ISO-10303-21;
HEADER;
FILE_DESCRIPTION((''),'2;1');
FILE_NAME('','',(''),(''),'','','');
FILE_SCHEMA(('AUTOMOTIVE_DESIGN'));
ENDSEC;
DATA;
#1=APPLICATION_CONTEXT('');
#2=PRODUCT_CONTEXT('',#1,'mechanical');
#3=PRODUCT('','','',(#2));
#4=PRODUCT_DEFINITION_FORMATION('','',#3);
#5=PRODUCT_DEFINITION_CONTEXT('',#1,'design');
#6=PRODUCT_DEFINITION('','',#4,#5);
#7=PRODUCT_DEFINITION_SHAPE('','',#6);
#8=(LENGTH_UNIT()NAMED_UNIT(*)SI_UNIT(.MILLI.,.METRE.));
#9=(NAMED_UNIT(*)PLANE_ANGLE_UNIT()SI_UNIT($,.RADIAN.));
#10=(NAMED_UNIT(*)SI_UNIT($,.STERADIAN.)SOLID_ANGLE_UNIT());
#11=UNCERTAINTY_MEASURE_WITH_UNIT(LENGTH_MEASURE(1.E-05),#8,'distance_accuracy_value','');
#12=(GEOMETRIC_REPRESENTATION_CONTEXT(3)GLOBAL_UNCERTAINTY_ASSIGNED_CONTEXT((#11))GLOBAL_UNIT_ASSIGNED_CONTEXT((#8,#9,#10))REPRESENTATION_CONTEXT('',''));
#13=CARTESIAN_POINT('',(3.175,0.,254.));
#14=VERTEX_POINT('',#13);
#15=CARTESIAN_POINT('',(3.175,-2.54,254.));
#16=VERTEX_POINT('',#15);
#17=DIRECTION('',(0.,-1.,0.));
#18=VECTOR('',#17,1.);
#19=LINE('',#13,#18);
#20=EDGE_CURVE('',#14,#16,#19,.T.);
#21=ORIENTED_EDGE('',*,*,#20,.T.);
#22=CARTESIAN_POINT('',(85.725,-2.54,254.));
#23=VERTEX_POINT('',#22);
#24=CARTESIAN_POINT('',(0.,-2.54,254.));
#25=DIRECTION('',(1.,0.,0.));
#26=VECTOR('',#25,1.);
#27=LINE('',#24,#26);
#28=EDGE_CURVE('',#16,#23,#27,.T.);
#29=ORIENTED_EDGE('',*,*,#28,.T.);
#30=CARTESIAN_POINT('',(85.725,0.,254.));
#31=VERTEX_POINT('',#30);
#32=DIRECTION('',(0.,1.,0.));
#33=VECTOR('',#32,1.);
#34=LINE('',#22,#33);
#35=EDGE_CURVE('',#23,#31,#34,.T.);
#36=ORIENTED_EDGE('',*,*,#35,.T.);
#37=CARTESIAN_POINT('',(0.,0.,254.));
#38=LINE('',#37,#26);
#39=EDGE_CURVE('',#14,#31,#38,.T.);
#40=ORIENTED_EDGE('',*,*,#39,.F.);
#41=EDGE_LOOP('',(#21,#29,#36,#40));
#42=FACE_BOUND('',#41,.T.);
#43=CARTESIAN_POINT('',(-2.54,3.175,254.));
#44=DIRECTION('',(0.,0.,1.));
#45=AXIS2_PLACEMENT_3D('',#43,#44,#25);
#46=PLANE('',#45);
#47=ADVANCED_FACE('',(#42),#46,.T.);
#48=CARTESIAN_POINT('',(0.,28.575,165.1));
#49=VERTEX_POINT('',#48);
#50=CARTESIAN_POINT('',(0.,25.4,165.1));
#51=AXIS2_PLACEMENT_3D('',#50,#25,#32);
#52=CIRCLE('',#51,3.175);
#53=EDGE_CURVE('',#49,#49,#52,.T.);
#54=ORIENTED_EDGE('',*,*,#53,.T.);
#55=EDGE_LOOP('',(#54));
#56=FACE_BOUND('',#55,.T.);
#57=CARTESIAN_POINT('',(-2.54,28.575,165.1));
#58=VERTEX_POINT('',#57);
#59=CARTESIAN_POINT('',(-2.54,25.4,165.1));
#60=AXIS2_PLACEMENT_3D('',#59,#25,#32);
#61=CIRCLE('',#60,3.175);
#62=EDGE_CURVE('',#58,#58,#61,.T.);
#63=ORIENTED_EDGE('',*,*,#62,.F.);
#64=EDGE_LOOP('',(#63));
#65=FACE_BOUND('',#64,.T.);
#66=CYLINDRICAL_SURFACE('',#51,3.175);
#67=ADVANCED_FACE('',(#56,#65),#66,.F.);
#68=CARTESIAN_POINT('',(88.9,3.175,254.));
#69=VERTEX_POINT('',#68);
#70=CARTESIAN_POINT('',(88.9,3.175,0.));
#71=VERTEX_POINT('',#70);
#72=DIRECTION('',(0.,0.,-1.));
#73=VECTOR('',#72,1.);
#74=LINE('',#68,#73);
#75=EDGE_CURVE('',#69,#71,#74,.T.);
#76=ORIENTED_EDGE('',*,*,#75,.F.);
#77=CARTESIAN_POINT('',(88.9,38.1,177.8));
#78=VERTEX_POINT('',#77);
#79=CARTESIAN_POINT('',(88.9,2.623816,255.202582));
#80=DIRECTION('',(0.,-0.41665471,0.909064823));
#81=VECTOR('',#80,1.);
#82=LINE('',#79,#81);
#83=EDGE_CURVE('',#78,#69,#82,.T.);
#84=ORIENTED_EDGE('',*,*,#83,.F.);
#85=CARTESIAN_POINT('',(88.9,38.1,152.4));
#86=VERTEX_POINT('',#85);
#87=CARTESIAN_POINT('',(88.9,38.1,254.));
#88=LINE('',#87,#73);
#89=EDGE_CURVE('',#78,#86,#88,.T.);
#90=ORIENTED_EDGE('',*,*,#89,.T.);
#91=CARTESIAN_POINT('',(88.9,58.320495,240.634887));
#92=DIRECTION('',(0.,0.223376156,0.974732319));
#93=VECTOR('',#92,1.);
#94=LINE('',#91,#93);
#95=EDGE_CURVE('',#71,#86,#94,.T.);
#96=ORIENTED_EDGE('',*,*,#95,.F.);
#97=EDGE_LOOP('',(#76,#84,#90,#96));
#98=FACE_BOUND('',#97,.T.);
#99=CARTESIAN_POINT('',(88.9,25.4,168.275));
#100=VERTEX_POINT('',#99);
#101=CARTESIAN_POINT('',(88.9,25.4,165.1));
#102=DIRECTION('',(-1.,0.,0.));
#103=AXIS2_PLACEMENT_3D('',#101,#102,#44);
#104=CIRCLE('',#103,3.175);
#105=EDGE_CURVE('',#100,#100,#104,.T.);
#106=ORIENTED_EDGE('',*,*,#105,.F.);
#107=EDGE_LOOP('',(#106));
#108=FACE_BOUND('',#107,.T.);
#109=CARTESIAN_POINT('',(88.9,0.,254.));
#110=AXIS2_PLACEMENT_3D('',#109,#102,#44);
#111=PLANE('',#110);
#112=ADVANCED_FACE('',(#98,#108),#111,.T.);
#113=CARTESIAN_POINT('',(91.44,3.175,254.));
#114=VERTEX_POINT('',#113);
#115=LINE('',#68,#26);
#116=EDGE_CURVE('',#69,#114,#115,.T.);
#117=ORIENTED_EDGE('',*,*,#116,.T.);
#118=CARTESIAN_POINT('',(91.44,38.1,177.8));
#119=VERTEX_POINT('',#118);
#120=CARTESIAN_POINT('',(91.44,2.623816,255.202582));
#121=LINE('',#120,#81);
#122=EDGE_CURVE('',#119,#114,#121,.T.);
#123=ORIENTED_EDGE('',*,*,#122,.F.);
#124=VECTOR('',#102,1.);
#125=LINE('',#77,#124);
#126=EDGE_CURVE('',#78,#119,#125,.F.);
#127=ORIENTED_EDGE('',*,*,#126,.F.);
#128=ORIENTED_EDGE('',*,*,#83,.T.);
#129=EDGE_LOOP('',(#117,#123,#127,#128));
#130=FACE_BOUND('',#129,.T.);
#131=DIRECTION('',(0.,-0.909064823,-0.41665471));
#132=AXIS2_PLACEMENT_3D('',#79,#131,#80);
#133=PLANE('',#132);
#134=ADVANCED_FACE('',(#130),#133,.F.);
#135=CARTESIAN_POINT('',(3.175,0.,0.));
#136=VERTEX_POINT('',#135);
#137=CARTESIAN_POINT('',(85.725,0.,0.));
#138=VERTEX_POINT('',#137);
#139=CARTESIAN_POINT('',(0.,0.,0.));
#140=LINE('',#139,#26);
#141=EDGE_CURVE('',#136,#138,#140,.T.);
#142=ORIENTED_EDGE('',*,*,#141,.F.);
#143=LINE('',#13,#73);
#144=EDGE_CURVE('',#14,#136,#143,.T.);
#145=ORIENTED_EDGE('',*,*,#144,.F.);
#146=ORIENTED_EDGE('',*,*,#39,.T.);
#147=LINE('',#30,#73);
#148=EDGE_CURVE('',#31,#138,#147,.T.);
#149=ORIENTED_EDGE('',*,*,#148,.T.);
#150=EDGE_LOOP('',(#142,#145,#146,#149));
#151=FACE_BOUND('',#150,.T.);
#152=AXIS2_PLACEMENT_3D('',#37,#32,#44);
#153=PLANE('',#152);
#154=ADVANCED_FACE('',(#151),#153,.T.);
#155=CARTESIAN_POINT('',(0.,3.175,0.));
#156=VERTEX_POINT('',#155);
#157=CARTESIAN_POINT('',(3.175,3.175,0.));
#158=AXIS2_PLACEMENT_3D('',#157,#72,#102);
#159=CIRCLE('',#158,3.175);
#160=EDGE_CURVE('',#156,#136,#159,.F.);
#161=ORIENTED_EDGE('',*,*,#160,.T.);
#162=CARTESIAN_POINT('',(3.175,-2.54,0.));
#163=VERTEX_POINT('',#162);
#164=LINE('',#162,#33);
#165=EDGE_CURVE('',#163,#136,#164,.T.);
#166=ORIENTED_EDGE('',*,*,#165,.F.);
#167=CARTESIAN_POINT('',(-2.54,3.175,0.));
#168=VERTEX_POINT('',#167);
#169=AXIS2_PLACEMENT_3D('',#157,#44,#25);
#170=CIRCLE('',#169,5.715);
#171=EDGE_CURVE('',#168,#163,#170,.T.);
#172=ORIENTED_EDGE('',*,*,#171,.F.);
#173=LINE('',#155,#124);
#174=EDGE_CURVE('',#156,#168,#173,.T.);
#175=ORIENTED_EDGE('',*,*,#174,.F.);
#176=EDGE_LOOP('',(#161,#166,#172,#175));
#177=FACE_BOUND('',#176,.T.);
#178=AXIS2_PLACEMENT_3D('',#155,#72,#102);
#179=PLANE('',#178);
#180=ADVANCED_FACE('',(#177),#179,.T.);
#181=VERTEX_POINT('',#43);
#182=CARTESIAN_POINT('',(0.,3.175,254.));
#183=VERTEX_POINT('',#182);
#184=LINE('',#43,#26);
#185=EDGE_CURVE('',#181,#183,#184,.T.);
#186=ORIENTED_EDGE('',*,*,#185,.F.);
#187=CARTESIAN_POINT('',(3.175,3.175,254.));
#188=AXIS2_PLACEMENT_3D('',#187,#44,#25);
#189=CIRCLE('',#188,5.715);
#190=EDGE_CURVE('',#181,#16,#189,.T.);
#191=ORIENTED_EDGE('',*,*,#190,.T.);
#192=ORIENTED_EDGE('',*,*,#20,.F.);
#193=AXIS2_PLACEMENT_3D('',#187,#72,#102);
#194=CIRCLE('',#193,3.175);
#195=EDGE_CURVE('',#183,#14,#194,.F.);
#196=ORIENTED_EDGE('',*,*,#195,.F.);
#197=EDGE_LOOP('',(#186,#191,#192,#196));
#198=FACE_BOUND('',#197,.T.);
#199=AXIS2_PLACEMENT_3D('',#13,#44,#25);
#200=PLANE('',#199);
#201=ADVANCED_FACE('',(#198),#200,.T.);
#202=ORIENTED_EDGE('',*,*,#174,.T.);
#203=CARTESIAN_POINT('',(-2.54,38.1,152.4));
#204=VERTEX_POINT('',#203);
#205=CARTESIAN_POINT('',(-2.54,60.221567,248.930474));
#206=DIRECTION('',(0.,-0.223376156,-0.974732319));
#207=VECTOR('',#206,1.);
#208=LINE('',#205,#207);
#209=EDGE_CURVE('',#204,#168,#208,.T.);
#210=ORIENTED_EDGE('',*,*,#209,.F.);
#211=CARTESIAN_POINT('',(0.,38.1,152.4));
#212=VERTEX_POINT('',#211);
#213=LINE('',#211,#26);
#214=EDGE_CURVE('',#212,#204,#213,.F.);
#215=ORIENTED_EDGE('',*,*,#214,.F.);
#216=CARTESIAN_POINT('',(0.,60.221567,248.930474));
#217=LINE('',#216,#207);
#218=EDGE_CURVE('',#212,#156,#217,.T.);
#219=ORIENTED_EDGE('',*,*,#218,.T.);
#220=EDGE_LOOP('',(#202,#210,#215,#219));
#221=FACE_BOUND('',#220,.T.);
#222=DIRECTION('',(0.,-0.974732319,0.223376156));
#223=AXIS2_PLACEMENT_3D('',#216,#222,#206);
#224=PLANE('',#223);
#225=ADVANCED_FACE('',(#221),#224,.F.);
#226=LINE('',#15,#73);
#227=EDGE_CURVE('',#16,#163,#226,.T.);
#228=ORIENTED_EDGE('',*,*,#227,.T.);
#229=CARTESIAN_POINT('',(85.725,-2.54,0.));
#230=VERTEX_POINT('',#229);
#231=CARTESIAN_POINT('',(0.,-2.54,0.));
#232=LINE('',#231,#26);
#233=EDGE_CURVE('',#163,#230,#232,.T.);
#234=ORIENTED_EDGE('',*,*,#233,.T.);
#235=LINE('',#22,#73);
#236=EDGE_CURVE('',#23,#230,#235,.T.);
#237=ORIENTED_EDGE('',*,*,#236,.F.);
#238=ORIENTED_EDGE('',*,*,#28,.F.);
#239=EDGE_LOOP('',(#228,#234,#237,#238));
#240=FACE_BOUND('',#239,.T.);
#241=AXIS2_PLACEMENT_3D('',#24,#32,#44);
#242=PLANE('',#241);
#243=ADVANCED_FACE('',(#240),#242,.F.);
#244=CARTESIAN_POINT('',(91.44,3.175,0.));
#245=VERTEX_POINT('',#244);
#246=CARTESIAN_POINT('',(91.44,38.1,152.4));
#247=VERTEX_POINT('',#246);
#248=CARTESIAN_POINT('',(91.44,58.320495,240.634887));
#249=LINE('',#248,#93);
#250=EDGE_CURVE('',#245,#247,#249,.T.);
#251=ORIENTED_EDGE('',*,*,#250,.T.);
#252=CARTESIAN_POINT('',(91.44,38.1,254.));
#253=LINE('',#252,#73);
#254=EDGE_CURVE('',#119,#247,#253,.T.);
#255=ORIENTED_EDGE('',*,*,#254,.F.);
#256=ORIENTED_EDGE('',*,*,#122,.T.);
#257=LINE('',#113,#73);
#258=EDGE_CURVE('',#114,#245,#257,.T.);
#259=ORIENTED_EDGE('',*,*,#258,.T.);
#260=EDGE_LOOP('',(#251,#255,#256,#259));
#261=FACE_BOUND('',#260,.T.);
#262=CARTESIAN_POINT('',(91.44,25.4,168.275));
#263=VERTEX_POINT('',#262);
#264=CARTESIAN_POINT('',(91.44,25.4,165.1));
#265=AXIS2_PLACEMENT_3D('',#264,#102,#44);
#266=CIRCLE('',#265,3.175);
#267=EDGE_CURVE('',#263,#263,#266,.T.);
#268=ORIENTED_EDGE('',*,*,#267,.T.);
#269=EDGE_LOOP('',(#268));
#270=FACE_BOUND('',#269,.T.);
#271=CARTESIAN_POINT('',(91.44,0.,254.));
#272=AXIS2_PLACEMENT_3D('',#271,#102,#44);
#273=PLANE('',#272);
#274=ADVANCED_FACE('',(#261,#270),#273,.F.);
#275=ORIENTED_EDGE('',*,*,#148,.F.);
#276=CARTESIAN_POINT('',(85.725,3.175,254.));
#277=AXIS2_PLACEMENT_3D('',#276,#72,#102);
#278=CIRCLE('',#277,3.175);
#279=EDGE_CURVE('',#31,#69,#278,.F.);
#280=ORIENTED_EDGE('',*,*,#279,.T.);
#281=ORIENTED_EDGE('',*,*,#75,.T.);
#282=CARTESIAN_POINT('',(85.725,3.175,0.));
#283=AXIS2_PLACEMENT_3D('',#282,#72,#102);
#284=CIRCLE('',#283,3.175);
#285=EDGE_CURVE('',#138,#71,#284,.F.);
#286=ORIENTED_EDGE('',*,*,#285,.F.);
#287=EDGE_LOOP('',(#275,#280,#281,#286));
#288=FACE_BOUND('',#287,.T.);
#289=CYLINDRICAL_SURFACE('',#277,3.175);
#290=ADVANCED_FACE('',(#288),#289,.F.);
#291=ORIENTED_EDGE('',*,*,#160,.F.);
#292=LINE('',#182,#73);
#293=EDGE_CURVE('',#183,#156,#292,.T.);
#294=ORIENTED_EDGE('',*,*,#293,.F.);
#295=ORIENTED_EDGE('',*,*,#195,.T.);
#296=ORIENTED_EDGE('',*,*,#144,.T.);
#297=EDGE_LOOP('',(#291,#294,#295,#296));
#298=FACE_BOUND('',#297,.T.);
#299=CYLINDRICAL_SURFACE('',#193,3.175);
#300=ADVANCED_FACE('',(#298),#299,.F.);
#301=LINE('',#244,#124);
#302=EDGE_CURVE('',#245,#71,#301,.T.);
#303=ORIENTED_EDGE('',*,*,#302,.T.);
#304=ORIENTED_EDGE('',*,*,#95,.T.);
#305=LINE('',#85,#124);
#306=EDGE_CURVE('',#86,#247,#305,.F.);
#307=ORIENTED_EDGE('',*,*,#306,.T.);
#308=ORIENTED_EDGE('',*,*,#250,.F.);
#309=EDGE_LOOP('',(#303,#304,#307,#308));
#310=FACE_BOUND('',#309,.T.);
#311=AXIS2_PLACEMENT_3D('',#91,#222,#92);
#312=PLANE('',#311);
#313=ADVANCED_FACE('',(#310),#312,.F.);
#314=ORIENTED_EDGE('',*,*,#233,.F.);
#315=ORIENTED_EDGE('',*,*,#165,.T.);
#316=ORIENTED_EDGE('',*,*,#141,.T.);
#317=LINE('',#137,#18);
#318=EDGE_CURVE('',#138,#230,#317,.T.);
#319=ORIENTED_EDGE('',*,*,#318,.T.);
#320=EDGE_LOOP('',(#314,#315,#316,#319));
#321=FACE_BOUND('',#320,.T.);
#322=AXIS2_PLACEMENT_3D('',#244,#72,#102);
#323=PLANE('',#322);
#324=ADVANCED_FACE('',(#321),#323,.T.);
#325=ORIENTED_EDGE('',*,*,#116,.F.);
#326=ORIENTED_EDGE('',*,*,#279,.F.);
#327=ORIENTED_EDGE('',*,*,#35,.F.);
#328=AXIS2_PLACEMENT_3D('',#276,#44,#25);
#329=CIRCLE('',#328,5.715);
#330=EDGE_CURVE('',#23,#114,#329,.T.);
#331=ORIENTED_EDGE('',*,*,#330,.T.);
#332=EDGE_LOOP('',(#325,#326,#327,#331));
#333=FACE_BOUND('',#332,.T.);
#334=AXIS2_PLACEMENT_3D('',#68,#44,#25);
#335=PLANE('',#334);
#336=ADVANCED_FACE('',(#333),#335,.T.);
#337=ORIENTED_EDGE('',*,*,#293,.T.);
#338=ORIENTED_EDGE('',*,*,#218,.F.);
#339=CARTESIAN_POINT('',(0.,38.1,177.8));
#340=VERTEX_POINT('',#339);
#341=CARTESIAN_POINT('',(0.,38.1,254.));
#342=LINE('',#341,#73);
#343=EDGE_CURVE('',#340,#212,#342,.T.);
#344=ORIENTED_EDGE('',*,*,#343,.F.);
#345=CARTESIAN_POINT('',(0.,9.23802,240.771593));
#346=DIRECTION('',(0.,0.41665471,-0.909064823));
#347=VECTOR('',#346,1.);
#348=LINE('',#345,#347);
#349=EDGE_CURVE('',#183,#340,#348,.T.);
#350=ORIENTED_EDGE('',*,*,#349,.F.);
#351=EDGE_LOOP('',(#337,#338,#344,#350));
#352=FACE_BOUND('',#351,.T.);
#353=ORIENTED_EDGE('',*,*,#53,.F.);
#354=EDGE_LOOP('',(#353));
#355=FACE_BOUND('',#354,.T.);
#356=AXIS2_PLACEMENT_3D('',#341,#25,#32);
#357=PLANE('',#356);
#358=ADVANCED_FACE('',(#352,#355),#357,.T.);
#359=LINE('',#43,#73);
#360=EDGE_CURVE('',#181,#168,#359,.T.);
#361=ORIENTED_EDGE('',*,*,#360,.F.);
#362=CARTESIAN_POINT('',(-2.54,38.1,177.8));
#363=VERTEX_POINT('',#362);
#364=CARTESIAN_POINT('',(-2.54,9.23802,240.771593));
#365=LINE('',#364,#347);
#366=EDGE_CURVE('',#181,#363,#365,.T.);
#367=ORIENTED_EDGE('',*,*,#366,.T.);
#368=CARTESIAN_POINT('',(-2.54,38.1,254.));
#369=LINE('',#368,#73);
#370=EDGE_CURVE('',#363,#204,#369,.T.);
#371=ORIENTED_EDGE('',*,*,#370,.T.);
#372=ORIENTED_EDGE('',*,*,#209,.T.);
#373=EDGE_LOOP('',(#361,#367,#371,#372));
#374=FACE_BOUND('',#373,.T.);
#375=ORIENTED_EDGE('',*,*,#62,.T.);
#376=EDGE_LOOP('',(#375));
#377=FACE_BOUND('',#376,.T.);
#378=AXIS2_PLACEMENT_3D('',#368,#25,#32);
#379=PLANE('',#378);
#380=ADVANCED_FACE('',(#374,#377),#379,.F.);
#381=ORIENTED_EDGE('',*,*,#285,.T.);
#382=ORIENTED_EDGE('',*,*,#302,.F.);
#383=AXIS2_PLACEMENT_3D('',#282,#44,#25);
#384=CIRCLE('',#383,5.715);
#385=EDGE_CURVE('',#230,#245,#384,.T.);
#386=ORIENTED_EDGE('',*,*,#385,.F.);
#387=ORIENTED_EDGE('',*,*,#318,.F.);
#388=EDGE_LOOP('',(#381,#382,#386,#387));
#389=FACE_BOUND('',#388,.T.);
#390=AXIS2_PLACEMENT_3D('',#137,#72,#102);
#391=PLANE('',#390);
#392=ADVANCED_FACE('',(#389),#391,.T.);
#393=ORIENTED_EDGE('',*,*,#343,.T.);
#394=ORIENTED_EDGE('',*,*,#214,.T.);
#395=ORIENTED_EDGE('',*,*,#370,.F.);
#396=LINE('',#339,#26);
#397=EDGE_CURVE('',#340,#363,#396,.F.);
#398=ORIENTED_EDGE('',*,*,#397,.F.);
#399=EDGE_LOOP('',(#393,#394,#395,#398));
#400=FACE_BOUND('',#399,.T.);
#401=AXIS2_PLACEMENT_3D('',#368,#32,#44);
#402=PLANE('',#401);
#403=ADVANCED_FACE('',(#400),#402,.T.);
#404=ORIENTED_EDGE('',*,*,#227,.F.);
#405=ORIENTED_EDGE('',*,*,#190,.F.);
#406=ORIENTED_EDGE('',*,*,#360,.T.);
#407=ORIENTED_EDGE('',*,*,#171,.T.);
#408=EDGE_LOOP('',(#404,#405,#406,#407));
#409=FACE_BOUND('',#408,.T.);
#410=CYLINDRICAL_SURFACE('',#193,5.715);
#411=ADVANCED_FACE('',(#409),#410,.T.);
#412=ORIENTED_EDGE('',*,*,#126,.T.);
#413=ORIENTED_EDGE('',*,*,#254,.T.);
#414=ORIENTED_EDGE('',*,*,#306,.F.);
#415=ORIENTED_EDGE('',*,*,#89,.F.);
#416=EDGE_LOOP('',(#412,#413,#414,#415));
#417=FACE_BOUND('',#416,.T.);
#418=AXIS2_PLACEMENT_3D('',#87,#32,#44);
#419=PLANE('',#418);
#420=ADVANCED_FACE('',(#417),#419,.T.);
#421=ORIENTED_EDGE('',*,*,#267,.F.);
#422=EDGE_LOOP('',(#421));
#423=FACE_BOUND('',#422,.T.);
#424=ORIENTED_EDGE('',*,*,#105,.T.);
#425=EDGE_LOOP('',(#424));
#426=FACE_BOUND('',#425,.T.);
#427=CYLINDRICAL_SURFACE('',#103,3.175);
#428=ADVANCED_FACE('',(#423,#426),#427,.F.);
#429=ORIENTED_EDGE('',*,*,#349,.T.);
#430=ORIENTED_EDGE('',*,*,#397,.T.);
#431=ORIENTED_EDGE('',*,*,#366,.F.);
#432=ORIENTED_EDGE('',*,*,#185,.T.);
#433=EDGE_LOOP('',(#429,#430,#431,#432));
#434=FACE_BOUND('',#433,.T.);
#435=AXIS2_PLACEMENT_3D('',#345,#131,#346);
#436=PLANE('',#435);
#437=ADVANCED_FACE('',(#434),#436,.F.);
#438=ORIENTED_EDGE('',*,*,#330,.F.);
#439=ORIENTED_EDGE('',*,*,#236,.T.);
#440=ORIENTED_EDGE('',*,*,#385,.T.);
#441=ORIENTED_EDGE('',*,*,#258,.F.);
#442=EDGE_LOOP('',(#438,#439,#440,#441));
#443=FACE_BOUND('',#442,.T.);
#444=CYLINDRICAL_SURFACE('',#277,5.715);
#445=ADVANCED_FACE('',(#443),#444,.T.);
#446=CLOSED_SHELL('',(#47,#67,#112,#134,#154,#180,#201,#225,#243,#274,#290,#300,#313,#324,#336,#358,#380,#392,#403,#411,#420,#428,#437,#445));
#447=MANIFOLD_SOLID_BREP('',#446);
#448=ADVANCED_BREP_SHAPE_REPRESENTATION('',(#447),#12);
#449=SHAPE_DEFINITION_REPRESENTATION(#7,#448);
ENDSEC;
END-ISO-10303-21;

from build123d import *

# Parameters (mm, degrees)
BASE_FLANGE1_DEPTH = 254
SKETCH7_R          = 3.175
CUT_EXTRUDE1_DEPTH = 274.495613128


# Sheet-metal steps are written as plain solids
with BuildPart() as part:
    # Sketch2 → Base-Flange1 (new body)
    with BuildSketch(Plane.XY):
        with BuildLine():
            Line((0, 38.1), (0, 3.175))
            ThreePointArc((0, 3.175), (0.92993597, 0.92993597), (3.175, 0))
            Line((3.175, 0), (85.725, 0))
            ThreePointArc((85.725, 0), (87.97006403, 0.92993597), (88.9, 3.175))
            Line((88.9, 3.175), (88.9, 38.1))
            Line((88.9, 38.1), (91.44, 38.1))
            Line((91.44, 38.1), (91.44, 3.175))
            ThreePointArc((91.44, 3.175), (89.766115254, -0.866115254), (85.725, -2.54))
            Line((85.725, -2.54), (3.175, -2.54))
            ThreePointArc((3.175, -2.54), (-0.866115254, -0.866115254), (-2.54, 3.175))
            Line((-2.54, 3.175), (-2.54, 38.1))
            Line((-2.54, 38.1), (0, 38.1))
        make_face()
    extrude(amount=BASE_FLANGE1_DEPTH)

    # Sketch7 → Cut-Extrude1 (cut, through all)
    with BuildSketch(Plane(origin=(91.44, 0, 0), x_dir=(0, 0, -1), z_dir=(1, 0, 0))):
        with Locations(Location((-165.1, 25.4, 0), (0, 0, 90))):
            Circle(SKETCH7_R)
        Polygon((-254, 38.1), (-254, 3.175), (-177.8, 38.1), align=None)
        Polygon((0, 38.1), (0, 3.175), (-152.4, 38.1), align=None)
    extrude(amount=-CUT_EXTRUDE1_DEPTH, mode=Mode.SUBTRACT)


solid = part.part
